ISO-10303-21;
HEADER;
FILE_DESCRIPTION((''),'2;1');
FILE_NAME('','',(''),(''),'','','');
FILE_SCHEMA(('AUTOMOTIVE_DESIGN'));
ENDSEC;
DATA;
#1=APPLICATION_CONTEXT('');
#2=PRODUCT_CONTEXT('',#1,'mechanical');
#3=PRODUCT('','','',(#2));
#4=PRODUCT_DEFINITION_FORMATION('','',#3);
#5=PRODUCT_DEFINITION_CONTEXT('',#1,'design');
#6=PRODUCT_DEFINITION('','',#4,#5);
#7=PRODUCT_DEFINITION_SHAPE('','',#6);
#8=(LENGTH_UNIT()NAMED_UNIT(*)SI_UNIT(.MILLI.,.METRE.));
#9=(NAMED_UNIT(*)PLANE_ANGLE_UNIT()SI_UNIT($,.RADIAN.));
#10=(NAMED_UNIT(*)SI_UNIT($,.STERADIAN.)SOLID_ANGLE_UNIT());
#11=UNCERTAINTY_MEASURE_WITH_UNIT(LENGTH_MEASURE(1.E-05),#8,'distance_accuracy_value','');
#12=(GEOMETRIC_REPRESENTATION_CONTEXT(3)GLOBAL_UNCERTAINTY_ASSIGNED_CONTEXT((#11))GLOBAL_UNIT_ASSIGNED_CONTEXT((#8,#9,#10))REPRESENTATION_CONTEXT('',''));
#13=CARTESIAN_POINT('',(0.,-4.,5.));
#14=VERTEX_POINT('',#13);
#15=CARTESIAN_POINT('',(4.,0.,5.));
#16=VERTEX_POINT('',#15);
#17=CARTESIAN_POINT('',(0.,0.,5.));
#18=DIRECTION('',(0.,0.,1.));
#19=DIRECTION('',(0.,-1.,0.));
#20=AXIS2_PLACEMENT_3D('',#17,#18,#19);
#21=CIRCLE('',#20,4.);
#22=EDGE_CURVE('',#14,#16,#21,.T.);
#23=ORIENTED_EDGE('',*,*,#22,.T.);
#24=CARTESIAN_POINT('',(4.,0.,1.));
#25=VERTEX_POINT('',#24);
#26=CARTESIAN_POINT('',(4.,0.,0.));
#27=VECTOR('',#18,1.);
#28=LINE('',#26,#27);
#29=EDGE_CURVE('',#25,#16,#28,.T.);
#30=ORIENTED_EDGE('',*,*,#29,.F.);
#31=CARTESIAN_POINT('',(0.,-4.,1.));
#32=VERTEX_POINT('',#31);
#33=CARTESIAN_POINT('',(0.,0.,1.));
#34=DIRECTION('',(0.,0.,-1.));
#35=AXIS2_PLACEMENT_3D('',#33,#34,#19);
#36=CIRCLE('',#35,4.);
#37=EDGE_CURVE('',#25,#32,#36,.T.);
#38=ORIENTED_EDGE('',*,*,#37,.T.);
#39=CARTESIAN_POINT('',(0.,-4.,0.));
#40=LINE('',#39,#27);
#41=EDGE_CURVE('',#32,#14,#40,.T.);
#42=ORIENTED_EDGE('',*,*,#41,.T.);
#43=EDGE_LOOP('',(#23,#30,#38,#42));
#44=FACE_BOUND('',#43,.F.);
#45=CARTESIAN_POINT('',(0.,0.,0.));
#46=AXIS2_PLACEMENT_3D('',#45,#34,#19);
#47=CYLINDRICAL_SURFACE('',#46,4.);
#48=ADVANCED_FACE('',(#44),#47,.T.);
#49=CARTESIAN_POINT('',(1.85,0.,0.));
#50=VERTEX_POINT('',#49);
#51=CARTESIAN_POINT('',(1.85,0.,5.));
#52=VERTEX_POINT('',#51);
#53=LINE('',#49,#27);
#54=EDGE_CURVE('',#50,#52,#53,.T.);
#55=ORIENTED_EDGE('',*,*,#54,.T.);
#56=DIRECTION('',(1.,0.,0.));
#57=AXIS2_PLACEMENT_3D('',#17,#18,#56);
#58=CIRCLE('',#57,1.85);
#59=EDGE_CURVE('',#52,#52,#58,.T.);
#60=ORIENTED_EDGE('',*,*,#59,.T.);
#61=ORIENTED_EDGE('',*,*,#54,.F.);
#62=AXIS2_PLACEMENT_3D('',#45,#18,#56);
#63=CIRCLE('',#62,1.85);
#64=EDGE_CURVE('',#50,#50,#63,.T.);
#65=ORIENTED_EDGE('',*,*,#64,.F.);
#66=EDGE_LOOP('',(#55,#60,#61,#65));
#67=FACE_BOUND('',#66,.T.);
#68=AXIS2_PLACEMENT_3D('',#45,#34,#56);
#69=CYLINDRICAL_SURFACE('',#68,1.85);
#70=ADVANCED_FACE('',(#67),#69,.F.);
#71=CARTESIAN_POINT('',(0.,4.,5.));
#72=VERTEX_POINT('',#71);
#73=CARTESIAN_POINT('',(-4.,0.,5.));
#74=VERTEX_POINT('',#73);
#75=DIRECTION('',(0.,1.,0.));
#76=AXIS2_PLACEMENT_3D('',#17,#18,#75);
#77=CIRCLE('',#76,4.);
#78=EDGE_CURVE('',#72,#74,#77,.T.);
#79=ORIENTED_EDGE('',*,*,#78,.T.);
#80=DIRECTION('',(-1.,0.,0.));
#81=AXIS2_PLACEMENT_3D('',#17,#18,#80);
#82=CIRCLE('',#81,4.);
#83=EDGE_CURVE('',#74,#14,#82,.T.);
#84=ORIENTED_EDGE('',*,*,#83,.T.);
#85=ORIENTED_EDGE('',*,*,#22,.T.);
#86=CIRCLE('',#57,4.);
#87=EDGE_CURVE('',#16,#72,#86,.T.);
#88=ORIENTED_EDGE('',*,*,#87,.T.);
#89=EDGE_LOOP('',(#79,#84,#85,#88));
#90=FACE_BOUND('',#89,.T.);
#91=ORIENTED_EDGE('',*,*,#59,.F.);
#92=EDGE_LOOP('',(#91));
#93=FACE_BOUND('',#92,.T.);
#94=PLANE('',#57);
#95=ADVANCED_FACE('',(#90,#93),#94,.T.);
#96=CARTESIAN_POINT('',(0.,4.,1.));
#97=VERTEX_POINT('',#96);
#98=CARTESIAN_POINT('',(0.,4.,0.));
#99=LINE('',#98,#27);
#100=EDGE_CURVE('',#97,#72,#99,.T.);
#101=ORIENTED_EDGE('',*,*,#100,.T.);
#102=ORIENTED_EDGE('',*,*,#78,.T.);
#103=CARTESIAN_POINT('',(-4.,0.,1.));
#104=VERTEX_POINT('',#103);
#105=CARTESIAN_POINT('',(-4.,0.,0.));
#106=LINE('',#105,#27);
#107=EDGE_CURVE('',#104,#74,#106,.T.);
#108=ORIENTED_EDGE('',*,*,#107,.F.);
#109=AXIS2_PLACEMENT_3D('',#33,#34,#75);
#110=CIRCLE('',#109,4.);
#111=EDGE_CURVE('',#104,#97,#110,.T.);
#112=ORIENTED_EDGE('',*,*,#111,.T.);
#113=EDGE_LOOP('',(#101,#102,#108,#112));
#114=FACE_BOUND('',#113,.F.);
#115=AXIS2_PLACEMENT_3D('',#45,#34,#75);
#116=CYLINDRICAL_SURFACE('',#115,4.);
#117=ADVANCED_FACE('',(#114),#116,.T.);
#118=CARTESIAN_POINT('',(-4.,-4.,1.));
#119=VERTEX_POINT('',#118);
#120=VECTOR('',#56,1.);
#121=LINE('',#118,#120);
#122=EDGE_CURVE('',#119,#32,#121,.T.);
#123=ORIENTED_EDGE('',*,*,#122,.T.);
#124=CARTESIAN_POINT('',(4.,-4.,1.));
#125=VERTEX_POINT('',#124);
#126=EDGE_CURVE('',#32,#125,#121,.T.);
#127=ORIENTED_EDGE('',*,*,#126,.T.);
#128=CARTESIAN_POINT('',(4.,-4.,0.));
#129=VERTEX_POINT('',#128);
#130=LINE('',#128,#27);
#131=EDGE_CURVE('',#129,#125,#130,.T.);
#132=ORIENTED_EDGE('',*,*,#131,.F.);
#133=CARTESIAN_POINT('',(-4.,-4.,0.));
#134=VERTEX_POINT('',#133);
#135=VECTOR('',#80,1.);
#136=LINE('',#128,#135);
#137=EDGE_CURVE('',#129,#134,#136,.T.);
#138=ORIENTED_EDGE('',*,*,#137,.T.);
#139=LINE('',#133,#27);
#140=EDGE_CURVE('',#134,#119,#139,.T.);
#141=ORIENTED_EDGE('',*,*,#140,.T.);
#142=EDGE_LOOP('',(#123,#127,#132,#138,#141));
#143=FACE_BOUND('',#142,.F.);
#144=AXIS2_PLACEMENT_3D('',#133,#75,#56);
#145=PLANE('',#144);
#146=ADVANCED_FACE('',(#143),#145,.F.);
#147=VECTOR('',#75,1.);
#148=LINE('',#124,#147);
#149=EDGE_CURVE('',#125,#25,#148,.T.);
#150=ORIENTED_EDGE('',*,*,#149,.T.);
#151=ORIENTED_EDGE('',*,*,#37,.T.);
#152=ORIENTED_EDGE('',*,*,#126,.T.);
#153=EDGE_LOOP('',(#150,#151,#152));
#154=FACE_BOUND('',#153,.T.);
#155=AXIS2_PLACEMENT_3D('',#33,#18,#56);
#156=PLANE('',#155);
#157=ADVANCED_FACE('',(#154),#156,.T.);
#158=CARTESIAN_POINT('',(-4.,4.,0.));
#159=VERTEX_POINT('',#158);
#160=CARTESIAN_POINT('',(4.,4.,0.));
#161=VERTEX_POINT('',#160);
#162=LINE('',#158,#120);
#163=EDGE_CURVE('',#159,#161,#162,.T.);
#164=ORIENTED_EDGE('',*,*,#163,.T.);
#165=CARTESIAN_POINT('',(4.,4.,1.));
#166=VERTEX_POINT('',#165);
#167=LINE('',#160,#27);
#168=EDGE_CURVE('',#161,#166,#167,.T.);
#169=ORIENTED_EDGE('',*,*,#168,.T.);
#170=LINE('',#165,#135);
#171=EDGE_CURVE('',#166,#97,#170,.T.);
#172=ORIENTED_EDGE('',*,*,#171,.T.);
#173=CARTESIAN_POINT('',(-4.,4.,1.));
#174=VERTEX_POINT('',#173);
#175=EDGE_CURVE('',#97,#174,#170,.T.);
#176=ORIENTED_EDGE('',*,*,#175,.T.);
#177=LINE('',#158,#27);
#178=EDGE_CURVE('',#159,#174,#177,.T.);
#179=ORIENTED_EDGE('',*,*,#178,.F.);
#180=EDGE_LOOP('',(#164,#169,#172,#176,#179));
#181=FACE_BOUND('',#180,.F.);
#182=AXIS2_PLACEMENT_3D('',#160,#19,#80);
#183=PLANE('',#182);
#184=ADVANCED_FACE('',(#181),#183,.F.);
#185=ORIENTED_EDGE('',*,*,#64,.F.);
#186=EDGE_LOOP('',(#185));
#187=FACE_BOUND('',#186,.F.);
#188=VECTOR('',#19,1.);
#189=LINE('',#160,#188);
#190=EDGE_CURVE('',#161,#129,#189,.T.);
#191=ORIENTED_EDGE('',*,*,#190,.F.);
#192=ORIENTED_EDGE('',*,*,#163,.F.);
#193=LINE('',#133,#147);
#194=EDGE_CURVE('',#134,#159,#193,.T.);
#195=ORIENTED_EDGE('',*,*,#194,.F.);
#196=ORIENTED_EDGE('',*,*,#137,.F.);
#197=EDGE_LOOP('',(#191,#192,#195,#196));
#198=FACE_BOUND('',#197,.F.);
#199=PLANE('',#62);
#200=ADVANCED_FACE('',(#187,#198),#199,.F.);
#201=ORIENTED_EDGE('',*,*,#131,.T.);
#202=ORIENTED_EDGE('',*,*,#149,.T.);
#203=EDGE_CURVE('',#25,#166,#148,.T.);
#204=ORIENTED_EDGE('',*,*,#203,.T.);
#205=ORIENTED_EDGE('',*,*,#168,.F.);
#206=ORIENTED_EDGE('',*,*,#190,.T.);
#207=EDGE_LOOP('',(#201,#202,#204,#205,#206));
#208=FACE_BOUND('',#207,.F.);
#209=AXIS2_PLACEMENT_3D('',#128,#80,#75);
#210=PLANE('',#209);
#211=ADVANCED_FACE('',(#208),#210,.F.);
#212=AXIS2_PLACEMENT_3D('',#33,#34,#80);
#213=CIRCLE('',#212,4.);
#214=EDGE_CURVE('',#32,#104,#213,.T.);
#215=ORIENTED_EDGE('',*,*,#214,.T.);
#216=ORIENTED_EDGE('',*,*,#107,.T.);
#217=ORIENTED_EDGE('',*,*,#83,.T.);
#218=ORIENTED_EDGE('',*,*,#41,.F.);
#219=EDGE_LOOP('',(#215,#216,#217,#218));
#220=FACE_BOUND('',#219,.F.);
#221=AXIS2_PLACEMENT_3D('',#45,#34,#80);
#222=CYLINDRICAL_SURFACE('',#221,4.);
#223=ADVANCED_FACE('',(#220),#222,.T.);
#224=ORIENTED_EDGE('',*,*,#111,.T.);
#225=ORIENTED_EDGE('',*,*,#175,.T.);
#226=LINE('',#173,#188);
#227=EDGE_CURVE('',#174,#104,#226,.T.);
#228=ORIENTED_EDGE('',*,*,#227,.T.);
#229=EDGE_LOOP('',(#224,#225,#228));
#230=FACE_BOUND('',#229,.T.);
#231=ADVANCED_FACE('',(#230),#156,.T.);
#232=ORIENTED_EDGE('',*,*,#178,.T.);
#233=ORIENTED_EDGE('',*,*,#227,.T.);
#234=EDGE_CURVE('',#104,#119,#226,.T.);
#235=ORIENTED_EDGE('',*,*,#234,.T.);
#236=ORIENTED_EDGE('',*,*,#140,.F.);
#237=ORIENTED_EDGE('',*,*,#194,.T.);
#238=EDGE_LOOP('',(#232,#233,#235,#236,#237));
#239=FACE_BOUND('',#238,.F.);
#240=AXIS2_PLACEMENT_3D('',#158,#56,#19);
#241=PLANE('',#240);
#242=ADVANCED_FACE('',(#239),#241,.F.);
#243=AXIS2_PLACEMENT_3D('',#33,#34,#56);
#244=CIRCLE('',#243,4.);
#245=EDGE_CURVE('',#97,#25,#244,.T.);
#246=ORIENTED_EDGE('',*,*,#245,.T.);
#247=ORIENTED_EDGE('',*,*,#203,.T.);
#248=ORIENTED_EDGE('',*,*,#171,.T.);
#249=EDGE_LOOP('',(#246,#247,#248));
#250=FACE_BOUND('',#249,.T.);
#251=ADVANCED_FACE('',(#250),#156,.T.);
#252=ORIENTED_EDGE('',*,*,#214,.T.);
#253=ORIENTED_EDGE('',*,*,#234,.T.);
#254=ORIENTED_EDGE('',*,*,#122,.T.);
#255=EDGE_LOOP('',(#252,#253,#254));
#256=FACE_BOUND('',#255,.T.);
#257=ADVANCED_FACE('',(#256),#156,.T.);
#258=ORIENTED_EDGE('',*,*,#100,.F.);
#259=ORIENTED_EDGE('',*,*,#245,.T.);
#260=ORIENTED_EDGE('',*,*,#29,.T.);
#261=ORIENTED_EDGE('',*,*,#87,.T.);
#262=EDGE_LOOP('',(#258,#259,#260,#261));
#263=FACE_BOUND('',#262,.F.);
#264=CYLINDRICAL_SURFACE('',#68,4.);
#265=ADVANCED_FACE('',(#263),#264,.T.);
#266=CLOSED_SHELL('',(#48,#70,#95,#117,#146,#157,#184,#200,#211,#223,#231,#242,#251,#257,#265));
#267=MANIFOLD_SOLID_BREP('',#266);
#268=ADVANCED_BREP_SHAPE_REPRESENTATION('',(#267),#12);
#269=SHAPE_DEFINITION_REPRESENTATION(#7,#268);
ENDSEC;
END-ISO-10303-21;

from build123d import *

# Parameters (mm, degrees)
F0_R     = 1.85
F1_DEPTH = 1
F2_DEPTH = 5


with BuildPart() as f1:
    # F0 (on Top) → F1 (new body)
    with BuildSketch(Plane.XY):
        with BuildLine():
            ThreePointArc((4, 0), (2.8284271247, 2.8284271247), (0, 4))
            ThreePointArc((0, 4), (-2.8284271247, 2.8284271247), (-4, 0))
            ThreePointArc((-4, 0), (-2.8284271247, -2.8284271247), (0, -4))
            ThreePointArc((0, -4), (2.8284271247, -2.8284271247), (4, 0))
        make_face()
        Circle(F0_R, mode=Mode.SUBTRACT)
        with BuildLine():
            Line((0, 4), (-4, 4))
            Line((-4, 4), (-4, 0))
            ThreePointArc((-4, 0), (-2.8284271247, 2.8284271247), (0, 4))
        make_face()
        with BuildLine():
            Line((4, 4), (0, 4))
            ThreePointArc((0, 4), (2.8284271247, 2.8284271247), (4, 0))
            Line((4, 0), (4, 4))
        make_face()
        with BuildLine():
            ThreePointArc((0, -4), (-2.8284271247, -2.8284271247), (-4, 0))
            Line((-4, 0), (-4, -4))
            Line((-4, -4), (0, -4))
        make_face()
        with BuildLine():
            Line((4, -4), (4, 0))
            ThreePointArc((4, 0), (2.8284271247, -2.8284271247), (0, -4))
            Line((0, -4), (4, -4))
        make_face()
    extrude(amount=F1_DEPTH)

    # F0 (on Top) → F2 (join)
    with BuildSketch(Plane.XY):
        with BuildLine():
            ThreePointArc((4, 0), (2.8284271247, 2.8284271247), (0, 4))
            ThreePointArc((0, 4), (-2.8284271247, 2.8284271247), (-4, 0))
            ThreePointArc((-4, 0), (-2.8284271247, -2.8284271247), (0, -4))
            ThreePointArc((0, -4), (2.8284271247, -2.8284271247), (4, 0))
        make_face()
        Circle(F0_R, mode=Mode.SUBTRACT)
    extrude(amount=F2_DEPTH)


solid = f1.part
